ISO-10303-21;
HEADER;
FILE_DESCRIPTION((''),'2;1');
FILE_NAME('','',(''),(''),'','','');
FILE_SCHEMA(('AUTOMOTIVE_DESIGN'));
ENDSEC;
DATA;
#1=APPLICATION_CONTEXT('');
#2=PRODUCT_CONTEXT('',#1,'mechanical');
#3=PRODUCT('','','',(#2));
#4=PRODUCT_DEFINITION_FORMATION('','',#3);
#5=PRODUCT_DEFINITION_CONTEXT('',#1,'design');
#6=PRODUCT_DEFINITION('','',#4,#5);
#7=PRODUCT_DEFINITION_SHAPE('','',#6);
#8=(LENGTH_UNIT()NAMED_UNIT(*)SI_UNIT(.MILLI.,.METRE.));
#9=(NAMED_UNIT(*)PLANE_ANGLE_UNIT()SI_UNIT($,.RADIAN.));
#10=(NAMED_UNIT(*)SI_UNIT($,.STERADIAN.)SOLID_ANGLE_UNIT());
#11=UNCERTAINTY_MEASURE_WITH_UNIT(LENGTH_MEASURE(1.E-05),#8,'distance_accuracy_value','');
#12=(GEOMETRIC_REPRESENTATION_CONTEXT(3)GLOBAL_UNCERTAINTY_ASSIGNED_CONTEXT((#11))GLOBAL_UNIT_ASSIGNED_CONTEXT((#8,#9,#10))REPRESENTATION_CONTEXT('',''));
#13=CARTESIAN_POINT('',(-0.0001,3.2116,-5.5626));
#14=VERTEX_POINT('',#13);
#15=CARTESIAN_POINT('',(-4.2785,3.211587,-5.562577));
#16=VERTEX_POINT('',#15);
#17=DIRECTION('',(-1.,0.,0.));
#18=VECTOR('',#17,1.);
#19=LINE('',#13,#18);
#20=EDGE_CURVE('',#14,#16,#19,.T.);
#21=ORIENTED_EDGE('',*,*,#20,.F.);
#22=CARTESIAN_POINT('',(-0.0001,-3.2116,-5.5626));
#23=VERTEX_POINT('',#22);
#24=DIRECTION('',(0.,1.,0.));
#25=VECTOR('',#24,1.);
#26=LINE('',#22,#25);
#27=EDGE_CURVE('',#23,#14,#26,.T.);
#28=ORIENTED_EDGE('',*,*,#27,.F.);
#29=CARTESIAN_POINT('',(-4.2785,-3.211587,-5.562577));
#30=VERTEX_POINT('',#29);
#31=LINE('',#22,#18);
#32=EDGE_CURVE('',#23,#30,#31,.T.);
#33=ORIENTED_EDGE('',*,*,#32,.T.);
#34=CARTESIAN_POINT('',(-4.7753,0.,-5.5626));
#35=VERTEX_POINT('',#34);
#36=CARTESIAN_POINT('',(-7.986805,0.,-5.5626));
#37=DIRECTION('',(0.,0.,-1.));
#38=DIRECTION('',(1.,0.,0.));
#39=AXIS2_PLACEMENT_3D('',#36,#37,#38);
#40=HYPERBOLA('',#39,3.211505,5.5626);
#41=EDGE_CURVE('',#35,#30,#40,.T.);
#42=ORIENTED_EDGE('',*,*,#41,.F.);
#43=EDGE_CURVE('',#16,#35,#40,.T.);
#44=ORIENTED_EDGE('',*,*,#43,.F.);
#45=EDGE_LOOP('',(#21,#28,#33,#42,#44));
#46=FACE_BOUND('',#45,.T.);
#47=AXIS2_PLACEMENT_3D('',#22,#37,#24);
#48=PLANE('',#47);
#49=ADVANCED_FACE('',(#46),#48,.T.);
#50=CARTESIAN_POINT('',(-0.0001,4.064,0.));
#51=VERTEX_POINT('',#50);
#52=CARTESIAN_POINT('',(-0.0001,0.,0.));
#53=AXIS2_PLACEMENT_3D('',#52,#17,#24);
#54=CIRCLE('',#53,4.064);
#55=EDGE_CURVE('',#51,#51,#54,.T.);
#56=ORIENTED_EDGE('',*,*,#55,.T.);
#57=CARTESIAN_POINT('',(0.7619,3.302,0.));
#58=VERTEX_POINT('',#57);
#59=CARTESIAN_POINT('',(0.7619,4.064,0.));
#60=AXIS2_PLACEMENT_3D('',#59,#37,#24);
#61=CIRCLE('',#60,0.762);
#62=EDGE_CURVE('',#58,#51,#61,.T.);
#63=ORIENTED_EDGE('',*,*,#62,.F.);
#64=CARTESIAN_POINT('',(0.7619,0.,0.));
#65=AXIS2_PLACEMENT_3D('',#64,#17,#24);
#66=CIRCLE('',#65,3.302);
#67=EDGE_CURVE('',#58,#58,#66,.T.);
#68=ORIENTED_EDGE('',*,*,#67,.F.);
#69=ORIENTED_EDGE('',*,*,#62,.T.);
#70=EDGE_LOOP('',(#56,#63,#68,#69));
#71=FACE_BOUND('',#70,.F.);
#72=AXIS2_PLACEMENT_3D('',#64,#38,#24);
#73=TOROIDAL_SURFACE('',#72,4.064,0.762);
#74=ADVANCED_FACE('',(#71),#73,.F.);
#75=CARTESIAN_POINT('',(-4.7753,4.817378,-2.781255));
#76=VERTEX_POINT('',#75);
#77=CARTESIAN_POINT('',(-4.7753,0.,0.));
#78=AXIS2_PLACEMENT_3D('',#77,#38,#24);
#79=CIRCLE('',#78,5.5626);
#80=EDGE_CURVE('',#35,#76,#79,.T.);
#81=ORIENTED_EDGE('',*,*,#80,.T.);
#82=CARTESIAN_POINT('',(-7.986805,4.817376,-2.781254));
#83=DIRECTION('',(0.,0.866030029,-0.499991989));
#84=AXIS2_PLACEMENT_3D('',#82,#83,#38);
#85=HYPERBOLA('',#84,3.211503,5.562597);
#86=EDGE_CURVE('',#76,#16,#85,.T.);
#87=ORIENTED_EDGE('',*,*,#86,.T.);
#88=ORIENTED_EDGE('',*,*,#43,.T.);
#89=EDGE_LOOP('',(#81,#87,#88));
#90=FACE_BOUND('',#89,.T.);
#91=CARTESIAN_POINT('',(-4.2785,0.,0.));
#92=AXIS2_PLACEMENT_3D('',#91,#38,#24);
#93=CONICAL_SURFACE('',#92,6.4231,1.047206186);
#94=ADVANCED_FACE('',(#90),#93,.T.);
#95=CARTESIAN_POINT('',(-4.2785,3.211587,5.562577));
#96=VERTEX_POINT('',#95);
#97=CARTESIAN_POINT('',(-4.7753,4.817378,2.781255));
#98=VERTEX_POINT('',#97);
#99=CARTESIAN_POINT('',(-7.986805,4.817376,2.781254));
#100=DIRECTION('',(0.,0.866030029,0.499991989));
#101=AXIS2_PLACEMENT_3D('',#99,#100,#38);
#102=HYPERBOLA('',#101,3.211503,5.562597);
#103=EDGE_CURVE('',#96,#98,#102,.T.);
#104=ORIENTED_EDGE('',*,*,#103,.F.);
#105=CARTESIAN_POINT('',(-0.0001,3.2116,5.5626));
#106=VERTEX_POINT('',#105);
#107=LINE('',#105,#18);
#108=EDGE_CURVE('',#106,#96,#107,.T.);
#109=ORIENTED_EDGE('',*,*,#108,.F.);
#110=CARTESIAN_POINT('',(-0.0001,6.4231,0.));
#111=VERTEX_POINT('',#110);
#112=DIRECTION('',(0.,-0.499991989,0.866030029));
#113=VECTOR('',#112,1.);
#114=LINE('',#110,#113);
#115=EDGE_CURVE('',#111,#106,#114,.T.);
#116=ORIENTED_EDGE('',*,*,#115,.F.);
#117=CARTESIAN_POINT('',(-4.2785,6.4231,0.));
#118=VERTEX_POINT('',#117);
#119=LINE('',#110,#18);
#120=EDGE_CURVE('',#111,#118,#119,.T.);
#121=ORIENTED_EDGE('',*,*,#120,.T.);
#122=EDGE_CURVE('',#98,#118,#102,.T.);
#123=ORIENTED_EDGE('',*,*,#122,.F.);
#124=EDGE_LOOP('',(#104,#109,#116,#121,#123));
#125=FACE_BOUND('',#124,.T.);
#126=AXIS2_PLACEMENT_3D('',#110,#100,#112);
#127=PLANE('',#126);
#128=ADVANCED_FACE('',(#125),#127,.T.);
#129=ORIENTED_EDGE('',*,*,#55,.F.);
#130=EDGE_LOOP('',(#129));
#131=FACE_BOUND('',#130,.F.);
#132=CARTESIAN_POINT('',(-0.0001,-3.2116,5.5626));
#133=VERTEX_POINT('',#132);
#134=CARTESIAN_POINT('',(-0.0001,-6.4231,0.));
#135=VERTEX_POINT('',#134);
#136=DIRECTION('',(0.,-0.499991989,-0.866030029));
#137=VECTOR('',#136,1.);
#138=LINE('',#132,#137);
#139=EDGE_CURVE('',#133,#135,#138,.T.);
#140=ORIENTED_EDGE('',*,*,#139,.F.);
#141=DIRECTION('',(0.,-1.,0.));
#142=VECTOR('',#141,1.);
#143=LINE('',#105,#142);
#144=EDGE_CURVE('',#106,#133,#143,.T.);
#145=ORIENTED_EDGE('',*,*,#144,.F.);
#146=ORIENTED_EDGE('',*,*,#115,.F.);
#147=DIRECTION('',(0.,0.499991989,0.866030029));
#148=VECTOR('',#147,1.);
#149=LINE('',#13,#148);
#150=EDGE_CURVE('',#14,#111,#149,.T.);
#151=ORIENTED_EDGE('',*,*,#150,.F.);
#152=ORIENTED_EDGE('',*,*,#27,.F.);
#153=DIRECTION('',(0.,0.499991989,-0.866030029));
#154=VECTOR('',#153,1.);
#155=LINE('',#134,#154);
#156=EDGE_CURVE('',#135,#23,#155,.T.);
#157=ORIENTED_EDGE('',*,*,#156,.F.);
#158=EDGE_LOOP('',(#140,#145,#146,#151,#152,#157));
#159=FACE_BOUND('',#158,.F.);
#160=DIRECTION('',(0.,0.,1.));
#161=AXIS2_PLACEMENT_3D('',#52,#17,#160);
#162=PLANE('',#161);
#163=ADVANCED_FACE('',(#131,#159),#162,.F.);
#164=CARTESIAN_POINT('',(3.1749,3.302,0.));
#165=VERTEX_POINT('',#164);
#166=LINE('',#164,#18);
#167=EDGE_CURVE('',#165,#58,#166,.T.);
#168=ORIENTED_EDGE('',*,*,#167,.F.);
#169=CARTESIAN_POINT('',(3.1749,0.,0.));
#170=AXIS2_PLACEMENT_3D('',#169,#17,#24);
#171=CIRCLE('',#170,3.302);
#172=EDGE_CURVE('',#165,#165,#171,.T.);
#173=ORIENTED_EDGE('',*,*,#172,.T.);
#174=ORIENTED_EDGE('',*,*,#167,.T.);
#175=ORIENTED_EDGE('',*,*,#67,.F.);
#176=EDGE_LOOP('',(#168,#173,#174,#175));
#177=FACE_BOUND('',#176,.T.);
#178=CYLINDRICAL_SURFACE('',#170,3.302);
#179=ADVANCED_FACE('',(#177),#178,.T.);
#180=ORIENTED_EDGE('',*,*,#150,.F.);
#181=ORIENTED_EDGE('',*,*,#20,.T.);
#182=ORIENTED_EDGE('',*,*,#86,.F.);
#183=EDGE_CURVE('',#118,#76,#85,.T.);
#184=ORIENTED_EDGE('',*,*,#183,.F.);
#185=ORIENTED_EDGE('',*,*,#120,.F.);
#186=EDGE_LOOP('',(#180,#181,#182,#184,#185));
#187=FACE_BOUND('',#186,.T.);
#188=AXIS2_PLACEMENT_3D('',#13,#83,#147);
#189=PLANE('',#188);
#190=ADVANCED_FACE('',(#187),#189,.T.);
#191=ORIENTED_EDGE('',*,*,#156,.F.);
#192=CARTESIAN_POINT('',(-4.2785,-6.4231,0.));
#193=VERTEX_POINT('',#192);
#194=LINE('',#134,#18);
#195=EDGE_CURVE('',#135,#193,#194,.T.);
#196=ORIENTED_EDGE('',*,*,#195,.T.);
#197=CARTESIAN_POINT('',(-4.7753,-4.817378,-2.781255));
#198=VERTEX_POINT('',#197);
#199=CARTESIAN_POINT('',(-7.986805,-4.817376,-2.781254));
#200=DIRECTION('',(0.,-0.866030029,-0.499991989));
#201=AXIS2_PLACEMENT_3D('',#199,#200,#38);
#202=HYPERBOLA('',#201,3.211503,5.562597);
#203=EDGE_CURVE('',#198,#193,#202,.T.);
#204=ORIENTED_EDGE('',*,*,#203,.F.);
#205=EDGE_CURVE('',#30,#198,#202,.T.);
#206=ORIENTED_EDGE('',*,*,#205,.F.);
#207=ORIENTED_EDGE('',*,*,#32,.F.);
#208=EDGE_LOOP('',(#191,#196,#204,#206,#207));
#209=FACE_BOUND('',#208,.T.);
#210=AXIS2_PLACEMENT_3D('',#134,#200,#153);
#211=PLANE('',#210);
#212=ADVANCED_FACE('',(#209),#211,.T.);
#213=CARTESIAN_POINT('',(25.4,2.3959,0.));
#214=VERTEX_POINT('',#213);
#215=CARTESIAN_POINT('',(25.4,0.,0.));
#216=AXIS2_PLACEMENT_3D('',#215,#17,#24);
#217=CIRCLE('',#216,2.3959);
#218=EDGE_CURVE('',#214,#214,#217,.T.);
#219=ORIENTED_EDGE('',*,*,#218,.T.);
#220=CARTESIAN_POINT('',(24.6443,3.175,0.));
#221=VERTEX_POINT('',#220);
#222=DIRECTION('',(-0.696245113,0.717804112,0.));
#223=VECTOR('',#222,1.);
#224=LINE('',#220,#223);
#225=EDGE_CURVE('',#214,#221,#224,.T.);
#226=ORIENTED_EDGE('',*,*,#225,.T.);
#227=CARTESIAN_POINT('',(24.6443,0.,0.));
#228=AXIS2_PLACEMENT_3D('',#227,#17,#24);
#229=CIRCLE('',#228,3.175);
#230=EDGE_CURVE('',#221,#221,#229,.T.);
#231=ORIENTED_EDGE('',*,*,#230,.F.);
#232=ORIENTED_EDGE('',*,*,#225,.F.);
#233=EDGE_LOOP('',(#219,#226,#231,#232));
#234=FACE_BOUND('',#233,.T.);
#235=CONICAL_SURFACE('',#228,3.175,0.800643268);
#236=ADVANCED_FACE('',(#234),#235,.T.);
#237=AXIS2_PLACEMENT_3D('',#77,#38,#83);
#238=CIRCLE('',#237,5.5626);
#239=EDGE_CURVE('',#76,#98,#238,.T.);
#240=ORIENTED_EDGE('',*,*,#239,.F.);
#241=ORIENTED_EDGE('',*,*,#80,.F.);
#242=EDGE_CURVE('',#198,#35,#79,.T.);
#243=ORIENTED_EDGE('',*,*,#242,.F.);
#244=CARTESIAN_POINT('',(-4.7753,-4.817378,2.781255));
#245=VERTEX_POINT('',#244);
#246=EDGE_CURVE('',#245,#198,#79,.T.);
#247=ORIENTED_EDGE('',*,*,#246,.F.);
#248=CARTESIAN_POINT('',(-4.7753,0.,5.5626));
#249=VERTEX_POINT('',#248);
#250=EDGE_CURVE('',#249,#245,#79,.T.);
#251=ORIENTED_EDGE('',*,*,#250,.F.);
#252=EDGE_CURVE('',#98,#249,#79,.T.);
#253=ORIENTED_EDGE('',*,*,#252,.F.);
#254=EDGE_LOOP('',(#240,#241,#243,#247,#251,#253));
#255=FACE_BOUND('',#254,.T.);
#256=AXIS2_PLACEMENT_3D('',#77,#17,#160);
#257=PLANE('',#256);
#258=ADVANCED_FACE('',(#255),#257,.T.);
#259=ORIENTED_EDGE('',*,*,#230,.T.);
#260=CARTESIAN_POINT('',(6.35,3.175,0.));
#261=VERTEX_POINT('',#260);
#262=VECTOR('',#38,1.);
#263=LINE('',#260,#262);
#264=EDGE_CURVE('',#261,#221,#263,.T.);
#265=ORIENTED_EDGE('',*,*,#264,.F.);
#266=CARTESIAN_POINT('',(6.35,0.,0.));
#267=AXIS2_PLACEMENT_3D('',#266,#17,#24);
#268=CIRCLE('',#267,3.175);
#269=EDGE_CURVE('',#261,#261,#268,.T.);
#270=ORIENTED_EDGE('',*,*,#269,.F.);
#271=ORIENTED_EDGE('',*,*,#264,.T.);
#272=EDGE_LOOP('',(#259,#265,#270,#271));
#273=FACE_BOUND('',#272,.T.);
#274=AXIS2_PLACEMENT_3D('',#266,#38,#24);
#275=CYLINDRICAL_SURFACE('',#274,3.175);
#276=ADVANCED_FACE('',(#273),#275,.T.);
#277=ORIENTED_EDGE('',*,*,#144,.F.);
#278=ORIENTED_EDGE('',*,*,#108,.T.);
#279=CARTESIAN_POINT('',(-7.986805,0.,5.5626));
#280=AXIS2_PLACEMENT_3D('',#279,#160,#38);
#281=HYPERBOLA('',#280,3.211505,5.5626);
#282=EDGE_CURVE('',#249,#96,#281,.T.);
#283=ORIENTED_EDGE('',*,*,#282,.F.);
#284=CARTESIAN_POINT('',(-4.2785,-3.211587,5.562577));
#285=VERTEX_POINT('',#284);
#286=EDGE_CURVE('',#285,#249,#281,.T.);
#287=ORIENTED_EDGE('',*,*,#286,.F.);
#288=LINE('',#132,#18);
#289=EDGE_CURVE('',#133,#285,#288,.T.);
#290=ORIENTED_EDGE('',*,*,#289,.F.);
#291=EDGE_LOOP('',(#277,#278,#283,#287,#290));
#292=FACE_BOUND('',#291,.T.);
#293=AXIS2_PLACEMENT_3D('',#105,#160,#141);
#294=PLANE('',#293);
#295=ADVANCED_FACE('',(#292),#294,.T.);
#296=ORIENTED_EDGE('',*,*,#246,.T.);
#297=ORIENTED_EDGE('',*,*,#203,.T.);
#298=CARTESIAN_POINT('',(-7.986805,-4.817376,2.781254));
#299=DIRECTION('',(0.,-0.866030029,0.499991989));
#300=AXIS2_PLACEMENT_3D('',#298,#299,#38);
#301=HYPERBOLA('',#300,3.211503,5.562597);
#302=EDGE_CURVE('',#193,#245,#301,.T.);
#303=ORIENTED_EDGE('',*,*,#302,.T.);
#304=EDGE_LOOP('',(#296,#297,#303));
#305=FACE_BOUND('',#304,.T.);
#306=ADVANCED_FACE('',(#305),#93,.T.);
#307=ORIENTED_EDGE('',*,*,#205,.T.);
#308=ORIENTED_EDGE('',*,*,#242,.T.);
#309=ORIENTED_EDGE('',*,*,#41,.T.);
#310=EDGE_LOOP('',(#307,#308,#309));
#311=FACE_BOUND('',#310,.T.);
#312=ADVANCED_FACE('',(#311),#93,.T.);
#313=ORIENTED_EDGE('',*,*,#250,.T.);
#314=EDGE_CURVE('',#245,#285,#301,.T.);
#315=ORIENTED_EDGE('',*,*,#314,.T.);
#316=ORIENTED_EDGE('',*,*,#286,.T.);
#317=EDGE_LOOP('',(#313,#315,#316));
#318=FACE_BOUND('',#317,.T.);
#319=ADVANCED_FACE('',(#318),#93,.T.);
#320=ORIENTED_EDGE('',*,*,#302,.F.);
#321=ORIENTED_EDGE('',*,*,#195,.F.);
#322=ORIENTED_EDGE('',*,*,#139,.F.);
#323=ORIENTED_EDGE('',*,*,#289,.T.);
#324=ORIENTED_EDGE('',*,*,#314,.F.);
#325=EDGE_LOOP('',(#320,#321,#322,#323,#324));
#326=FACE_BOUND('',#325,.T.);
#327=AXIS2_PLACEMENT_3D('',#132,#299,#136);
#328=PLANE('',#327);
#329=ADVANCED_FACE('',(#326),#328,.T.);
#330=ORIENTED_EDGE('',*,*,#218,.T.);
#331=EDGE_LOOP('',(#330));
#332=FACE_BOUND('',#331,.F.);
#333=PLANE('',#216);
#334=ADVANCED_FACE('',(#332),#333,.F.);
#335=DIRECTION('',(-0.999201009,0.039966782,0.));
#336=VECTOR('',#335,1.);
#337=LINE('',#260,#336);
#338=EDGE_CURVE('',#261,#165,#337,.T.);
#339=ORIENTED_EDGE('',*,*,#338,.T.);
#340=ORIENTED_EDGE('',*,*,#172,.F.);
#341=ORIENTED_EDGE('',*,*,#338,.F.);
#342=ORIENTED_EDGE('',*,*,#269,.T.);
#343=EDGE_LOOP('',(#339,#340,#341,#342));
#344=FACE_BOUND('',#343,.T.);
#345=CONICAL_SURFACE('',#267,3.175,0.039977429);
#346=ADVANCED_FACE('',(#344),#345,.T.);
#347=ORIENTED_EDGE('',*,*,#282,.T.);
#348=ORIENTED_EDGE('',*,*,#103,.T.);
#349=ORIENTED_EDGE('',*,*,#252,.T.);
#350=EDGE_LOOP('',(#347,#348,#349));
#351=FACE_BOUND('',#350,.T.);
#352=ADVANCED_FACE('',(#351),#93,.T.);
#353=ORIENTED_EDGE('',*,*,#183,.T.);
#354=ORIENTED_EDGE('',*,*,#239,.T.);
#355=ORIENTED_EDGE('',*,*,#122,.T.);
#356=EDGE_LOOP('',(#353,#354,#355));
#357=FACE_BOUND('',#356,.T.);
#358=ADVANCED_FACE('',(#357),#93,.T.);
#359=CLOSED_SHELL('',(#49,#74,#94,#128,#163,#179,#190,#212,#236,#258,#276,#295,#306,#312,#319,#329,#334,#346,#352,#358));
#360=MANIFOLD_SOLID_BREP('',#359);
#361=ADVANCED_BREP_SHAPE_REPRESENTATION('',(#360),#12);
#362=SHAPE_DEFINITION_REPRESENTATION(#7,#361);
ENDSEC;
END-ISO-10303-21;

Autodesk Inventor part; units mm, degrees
ref_plane "YZ Plane" through (0, 0, 0) normal (1, 0, 0) x (0, 1, 0)
ref_plane "XZ Plane" through (0, 0, 0) normal (0, 1, 0) x (-1, 0, 0)
sketch "Sketch1" plane through (0, 0, 0) normal (0, 0, 1) x (1, 0, 0)
  line L0 (0, 5.5626) -> (0, 3.302)
  line L1 (6.35, 3.175) -> (25.4, 3.175)
  line L2 (25.4, 3.175) -> (25.4, 0)
  line L3 (25.4, 0) -> (-0.0001, 0)
  line L4 (-5.0801, 0) -> (30.48, 0) projected
  line L5 (-0.0001, 0) -> (-0.0001, 5.5626)
  line L6 (-0.0001, 5.5626) -> (0, 5.5626)
  line L7 (6.35, 3.175) -> (3.1749, 3.302)
  line L8 (3.1749, 3.302) -> (0, 3.302)
  line L9 (0, -1.1125) -> (0, 6.6751) projected
  dimension "d0" = 25.4
  dimension "d1" = 19.05
  dimension "d2" = 6.35
  dimension "d9" = 0.0001
  dimension "d10" = 11.1252
  dimension "d13" = 3.1751
  dimension "d14" = 6.604
revolve "Body" add sketch "Sketch1" angle 360 about axis through (25.4, 0, 0) along (-1, 0, 0)
sketch "Sketch2" plane through (-0.0001, 0, 0) normal (-1, 0, 0) x (0, 0, 1)
  line L0 (0, 6.4231) -> (5.5626, 3.2116)
  line L1 (5.5626, 3.2116) -> (5.5626, -3.2116)
  line L2 (5.5626, -3.2116) -> (0, -6.4231)
  line L3 (0, -6.4231) -> (-5.5626, -3.2116)
  line L4 (-5.5626, -3.2116) -> (-5.5626, 3.2116)
  line L5 (-5.5626, 3.2116) -> (0, 6.4231)
  point P0 (0, 0)
  point P1 (0, 0)
  dimension "d11" = 11.1252
extrude "Head" add sketch "Sketch2" along normal blind 4.7752
sketch "Sketch4" plane through (0, 0, 0) normal (0, 0, 1) x (1, 0, 0)
  line L0 (-4.7753, 5.5626) -> (-4.7753, 6.4231)
  line L1 (-4.7753, 6.4231) -> (-4.2785, 6.4231)
  line L2 (-4.2785, 6.4231) -> (-4.7753, 5.5626)
  line L3 (-5.7303, 0) -> (0.9549, 0) projected
  line L4 (-0.0001, 6.4231) -> (-4.7753, 6.4231) projected
  line L5 (-4.7753, 3.2116) -> (-4.7753, 6.4231) projected
  dimension "d5" = 30
  dimension "d19" = 11.1252
revolve "Chamfer1" cut sketch "Sketch4" angle 360 about axis through (-10, 0, 0) along (1, 0, 0)
thread "Thread" size "1/4-20 UNC" class "2A" standard "ANSI Unified Screw Threads" length 19.05
chamfer "Chamfer2" distance 0.7791 distance2 0.7557 1 edges at (25.4, -3.175, 0) measured on face at (25.4, -0.1276, -1.0506)
ref_plane "Work Plane1" through (1.525, 0, 0) normal (0, 0, 1) x (1, 0, 0)
fillet "Fillet2" radius 0.762 1 edges at (0, -3.302, 0)
equation "\"d0\" = NLG"
equation "\"d1\" = GEL"
equation "\"d2\" = GD"
equation "\"d10\" = SD2"
equation "\"d14\" = BDM"
equation "\"d11\" = SW"
equation "\"d3\" = KOH - SD"
equation "\"d5\" = ANG1"
equation "\"d19\" = SW0"
equation "\"d63\" = R"
equation "\"d15\" = GEL"
equation "\"d6\" = -0.5 * SPD + 0.5 * GD"
equation "\"NLG\" = 25.4"
equation "\"GD\" = NND"
equation "\"BDM\" = 6.604"
equation "\"KOH\" = 4.7752"
equation "\"GEL\" = 19.05"
equation "\"SW\" = 11.1252"
equation "\"SW0\" = SW"
equation "\"SPD\" = GD1"
equation "\"SD2\" = SW"
equation "\"SD\" = 0"
equation "\"ANG1\" = 30deg"
equation "\"GAL\" = 3.175"
equation "\"GUL\" = 0.238 * GAL"
equation "\"R\" = 0.762"
equation "\"d62\" = -NLG - SD + GUL"
equation "\"GD1\" = 4.79184"
equation "\"THREADDIA\" = 6.35"
equation "\"TOA\" = 30deg"
equation "\"NND\" = 6.35"
equation "\"E0\" = 1.155 * SW"
properties part number "ANSI/ASME B18.2.1 - 1/4-20 UNC - 1" material "Steel, Mild"
